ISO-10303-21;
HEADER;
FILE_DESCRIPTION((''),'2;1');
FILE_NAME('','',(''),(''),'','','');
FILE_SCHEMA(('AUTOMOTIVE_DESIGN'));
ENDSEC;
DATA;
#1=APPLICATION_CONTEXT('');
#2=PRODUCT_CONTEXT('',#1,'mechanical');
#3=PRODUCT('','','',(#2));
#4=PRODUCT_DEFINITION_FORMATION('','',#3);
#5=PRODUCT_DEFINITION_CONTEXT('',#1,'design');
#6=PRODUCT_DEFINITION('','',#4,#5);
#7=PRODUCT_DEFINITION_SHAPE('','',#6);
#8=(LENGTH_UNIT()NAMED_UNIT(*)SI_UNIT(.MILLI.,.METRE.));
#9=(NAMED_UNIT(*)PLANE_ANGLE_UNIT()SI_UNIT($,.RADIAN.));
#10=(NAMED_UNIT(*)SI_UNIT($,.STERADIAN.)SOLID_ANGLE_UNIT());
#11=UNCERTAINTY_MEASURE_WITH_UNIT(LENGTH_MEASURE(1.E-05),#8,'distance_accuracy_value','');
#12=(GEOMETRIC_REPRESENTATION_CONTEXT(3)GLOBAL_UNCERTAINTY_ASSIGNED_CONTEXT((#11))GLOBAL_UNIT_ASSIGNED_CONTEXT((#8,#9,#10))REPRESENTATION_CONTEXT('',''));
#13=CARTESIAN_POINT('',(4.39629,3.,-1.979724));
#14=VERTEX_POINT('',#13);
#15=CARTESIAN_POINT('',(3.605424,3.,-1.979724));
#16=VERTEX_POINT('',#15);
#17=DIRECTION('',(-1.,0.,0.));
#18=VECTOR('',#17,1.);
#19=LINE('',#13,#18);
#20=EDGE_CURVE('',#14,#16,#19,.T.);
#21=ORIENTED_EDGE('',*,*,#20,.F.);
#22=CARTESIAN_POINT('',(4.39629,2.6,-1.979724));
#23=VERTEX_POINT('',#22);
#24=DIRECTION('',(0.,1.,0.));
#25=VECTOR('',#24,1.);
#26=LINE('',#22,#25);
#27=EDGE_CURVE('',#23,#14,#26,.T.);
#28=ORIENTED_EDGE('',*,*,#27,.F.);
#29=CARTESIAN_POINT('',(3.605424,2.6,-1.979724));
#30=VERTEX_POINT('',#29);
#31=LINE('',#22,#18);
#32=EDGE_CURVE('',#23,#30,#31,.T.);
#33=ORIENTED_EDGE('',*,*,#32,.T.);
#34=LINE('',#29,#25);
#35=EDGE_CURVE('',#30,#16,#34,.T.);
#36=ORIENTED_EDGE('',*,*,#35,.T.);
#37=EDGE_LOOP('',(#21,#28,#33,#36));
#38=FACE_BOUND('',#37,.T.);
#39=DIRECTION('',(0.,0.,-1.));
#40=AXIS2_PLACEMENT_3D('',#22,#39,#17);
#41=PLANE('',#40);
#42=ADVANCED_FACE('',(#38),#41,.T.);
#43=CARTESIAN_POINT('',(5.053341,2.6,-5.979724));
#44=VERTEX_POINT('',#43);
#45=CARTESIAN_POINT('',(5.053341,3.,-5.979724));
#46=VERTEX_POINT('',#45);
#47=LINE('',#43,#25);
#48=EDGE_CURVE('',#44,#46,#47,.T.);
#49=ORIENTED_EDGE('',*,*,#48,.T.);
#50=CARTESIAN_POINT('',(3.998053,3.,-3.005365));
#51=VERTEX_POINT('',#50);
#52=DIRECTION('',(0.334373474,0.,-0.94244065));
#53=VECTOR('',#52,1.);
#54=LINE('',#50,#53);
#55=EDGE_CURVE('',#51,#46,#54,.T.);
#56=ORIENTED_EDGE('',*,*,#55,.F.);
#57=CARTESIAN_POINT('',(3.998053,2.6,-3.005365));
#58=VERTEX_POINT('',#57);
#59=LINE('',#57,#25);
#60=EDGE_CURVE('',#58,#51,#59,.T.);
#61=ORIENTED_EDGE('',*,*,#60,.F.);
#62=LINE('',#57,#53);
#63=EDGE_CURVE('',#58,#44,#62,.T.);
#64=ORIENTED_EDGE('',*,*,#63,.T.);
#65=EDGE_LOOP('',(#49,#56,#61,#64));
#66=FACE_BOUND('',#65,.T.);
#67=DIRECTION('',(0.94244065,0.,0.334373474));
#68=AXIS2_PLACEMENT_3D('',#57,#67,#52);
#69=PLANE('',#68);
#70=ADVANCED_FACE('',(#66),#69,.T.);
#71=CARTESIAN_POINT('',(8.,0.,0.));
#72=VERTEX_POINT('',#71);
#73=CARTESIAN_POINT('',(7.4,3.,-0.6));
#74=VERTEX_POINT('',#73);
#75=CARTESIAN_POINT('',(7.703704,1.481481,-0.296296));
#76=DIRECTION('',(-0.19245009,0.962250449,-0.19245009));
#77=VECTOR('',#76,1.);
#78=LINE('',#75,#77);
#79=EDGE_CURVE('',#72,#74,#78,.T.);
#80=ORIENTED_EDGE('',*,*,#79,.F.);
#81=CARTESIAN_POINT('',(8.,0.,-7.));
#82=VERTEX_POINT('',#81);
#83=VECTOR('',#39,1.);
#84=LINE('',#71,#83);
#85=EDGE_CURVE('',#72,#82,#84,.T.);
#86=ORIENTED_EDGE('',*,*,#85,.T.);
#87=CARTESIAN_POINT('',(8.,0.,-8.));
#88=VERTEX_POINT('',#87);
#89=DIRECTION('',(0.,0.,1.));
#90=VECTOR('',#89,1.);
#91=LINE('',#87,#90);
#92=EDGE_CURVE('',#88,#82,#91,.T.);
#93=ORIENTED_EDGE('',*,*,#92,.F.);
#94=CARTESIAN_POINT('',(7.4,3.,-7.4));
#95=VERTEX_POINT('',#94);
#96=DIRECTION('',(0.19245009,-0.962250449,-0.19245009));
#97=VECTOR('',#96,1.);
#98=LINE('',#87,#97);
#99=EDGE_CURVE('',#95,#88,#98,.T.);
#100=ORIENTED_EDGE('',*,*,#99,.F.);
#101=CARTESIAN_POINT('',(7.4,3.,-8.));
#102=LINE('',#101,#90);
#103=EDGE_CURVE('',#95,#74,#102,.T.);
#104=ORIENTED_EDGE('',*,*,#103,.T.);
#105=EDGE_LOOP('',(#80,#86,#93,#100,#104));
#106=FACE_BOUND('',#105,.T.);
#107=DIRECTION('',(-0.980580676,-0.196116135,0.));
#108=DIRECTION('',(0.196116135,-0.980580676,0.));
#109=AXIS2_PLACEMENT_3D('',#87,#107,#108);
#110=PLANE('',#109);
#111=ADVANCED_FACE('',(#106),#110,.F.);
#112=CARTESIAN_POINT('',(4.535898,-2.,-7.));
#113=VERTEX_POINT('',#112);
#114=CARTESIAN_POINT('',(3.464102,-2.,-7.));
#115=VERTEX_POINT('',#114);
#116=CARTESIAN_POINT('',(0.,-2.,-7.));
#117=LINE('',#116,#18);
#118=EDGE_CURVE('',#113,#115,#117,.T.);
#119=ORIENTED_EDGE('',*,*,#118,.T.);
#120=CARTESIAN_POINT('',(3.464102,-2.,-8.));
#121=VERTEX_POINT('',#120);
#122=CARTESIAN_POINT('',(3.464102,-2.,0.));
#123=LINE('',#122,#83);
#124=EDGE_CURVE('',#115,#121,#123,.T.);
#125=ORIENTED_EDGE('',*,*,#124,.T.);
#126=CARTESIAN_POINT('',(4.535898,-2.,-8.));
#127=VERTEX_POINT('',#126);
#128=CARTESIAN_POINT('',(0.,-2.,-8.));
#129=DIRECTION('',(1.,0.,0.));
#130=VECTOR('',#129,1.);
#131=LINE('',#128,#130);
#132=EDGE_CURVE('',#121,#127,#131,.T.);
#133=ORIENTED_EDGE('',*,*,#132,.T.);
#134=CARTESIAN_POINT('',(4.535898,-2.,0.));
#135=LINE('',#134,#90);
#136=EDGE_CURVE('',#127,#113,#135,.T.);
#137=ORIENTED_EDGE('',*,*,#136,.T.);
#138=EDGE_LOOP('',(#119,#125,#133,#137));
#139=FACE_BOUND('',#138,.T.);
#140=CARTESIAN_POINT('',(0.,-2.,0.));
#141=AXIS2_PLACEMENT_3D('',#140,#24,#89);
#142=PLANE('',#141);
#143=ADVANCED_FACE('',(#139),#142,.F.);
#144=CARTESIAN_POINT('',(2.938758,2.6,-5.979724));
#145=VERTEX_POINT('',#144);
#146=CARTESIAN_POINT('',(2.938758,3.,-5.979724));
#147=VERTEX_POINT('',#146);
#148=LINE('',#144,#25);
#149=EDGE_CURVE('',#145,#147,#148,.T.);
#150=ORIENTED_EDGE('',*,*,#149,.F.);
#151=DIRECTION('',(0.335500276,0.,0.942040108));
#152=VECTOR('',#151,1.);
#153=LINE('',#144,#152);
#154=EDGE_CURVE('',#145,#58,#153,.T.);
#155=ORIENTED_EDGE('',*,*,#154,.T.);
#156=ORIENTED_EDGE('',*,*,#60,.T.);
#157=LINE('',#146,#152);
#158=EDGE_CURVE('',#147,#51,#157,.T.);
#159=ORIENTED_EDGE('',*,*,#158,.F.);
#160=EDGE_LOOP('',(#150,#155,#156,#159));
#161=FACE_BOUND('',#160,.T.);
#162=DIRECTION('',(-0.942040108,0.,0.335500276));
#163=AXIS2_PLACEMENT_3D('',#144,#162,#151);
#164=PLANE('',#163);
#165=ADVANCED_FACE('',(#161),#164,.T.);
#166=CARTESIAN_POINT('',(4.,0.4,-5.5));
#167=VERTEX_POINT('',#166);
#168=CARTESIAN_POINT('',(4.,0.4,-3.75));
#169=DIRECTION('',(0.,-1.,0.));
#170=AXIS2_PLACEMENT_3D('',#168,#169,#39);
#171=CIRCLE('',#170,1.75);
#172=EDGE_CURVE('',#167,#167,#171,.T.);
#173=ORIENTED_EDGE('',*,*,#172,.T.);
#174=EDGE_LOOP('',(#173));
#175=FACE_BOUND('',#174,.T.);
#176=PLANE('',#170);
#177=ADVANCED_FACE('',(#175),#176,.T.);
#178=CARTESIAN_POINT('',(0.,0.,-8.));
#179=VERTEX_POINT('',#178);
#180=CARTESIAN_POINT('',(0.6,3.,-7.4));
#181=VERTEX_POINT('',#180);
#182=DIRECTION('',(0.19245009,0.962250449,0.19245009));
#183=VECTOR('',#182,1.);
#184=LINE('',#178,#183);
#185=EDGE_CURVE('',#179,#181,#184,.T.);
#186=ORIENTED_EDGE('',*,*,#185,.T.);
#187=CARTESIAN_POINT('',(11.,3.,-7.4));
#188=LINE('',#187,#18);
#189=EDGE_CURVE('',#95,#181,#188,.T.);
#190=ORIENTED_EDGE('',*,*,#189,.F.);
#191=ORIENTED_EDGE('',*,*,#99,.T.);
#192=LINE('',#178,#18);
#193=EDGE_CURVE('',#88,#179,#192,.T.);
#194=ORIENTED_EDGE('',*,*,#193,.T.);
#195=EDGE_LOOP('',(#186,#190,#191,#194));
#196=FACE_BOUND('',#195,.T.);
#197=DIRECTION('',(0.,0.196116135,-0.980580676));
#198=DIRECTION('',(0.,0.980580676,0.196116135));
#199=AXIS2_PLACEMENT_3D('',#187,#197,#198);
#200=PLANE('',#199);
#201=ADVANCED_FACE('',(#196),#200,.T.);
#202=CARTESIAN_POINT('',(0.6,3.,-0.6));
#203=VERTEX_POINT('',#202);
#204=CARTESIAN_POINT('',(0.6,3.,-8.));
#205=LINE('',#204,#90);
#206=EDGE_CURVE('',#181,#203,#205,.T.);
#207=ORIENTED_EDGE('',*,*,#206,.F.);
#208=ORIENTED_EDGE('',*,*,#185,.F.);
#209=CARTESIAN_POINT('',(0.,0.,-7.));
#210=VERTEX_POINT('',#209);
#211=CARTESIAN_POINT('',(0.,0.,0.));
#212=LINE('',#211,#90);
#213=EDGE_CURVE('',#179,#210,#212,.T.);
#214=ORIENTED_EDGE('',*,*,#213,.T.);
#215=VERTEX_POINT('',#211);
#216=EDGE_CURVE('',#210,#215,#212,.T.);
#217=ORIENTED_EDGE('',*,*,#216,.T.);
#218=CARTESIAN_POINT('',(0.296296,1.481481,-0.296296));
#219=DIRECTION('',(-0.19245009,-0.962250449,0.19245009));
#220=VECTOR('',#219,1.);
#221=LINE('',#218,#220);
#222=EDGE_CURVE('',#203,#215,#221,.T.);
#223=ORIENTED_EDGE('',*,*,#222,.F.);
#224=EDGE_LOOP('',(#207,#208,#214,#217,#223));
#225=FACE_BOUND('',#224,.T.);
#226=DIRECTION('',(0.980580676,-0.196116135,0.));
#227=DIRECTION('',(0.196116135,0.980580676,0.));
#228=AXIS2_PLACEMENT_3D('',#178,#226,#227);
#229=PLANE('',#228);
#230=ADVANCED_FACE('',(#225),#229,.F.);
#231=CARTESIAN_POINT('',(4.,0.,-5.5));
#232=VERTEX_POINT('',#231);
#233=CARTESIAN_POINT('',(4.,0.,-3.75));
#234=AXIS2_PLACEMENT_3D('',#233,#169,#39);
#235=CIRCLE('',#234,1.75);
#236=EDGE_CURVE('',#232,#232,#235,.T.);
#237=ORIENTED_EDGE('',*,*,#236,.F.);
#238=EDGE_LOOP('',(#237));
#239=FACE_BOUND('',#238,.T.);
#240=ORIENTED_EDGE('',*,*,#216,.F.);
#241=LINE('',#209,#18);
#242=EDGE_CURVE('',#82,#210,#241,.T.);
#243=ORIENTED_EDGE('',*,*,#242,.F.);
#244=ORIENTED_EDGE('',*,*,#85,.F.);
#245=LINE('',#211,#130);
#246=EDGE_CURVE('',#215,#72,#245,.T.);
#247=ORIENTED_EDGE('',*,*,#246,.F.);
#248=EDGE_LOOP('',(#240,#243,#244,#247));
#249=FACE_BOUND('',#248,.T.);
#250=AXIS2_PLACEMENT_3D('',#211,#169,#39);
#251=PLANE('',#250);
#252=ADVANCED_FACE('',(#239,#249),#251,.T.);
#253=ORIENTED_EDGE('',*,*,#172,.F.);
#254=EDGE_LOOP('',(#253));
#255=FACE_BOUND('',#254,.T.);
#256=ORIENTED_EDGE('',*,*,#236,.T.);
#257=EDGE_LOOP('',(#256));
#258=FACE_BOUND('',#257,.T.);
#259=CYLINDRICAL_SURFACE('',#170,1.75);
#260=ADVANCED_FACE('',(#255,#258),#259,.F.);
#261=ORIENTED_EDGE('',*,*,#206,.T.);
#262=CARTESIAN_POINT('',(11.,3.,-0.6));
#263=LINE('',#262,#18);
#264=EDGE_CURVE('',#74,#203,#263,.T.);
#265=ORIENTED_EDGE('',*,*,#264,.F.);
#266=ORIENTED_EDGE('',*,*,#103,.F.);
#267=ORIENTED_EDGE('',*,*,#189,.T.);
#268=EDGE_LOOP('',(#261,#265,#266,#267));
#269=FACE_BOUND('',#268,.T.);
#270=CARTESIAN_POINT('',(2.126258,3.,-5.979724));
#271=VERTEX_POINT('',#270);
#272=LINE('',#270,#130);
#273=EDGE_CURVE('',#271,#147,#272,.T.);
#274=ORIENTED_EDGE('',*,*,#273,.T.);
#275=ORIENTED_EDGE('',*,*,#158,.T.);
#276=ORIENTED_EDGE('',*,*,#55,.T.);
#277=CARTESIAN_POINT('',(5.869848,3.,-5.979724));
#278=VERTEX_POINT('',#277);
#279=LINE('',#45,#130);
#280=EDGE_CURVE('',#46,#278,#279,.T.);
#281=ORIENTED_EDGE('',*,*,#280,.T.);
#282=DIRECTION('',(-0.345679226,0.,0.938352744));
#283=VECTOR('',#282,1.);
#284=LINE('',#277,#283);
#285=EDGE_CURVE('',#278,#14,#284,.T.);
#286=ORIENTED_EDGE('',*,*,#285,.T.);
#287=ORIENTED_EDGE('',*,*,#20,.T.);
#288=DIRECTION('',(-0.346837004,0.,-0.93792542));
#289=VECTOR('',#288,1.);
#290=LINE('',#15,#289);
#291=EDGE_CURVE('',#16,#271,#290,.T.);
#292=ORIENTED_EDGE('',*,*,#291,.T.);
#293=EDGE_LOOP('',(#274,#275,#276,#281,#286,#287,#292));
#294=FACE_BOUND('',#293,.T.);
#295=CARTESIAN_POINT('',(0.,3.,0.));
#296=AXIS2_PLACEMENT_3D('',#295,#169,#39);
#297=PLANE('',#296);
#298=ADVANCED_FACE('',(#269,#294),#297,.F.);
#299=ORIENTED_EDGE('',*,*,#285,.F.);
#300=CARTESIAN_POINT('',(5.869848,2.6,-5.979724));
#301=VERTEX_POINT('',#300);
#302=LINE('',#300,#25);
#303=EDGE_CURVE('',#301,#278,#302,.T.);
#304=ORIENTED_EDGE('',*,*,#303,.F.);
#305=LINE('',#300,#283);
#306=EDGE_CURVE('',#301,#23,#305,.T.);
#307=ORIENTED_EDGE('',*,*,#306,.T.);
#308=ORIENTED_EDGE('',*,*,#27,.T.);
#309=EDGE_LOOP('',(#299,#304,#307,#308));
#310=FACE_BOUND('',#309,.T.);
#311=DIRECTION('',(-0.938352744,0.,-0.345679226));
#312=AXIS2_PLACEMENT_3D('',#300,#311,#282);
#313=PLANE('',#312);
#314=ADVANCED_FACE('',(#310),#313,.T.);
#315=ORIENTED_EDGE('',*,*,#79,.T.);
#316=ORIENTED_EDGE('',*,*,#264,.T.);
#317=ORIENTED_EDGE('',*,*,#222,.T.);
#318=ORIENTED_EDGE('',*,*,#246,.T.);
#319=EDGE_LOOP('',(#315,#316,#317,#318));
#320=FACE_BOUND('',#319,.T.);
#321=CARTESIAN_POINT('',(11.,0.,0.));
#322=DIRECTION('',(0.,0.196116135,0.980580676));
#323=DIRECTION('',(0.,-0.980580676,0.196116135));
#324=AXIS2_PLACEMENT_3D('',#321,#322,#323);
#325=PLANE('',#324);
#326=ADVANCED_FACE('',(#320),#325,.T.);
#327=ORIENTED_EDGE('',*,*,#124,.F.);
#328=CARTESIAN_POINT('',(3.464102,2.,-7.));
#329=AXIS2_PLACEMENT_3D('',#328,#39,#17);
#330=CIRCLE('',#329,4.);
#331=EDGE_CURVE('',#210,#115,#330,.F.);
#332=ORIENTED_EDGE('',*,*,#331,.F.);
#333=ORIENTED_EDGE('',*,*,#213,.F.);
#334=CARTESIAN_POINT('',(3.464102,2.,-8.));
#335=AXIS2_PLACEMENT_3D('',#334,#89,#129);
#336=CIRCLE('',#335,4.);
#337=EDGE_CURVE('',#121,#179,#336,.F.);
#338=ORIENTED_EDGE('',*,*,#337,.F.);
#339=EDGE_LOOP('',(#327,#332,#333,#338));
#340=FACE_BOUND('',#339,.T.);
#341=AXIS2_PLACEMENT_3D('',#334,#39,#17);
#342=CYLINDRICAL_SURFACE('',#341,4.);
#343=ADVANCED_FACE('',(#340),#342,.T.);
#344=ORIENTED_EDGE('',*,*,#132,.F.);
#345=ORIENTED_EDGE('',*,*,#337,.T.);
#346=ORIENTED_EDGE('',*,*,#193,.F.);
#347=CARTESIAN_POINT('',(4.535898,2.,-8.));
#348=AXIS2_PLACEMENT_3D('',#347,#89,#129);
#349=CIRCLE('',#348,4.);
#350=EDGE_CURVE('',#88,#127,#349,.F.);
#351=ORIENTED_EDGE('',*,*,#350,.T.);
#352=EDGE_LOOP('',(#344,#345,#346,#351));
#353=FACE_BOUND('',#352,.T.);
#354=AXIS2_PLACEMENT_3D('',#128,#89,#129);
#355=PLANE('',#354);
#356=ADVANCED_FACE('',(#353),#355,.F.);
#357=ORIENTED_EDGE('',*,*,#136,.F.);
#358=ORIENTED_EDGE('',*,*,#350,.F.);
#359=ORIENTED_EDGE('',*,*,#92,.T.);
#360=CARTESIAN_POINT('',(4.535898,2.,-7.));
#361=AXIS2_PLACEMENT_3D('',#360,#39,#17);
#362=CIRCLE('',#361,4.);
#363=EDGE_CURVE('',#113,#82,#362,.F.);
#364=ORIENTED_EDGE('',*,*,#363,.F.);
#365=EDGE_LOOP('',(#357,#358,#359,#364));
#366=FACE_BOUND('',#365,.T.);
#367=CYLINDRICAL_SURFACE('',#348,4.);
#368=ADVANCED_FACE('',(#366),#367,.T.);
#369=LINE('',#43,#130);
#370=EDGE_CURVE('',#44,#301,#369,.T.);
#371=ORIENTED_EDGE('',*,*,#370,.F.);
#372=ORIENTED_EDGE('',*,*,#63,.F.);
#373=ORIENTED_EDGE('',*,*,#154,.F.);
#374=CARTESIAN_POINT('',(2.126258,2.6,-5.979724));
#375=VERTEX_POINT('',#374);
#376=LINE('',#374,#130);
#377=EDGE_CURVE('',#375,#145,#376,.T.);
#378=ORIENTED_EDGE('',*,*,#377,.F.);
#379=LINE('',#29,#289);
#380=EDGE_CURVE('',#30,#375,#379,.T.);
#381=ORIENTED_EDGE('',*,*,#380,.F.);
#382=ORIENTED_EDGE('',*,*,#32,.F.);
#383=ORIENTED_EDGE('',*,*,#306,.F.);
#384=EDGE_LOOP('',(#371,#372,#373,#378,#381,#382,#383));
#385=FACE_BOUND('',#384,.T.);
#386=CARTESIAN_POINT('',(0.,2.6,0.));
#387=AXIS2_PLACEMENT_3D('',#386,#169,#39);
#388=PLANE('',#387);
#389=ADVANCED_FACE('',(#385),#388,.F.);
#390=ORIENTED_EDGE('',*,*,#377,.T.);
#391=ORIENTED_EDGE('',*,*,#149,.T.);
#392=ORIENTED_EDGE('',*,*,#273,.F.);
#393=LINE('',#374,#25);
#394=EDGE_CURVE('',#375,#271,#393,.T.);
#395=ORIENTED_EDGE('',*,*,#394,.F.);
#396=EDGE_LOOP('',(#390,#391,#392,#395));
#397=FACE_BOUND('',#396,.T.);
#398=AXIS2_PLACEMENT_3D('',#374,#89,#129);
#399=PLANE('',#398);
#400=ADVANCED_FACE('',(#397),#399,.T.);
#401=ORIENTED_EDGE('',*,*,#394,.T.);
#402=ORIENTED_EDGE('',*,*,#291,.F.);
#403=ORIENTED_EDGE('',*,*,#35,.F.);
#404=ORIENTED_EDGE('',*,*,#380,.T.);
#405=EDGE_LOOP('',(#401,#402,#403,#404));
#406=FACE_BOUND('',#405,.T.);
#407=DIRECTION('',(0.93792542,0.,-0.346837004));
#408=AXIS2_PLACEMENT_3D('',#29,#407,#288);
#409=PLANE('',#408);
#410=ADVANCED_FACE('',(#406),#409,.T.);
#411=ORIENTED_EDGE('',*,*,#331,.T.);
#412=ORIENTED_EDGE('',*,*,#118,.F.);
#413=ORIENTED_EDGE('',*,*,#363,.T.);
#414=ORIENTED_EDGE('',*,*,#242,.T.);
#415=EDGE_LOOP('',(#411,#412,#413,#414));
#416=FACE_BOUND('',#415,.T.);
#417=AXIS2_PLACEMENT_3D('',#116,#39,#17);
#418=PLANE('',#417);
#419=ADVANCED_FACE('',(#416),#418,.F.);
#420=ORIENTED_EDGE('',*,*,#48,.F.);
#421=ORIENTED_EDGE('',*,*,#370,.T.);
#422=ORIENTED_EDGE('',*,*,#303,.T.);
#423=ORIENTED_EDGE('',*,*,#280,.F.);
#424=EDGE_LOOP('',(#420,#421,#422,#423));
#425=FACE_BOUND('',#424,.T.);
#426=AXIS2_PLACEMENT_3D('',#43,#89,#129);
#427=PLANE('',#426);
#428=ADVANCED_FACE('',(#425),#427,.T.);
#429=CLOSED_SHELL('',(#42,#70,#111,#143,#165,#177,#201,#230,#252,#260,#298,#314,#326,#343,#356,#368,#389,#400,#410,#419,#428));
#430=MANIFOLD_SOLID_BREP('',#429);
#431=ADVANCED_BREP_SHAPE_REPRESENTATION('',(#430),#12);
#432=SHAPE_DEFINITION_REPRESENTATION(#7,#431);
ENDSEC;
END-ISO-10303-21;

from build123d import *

# Parameters (mm, degrees)
SKETCH1_W               = 8
SKETCH1_H               = 8
BOSS_EXTRUDE1_DEPTH     = 3
CUT_EXTRUDE1_DEPTH      = 12.704699911
CUT_EXTRUDE1_DEPTH_BACK = 12.704699911
CUT_EXTRUDE2_DEPTH      = 11
SKETCH4_R               = 1.75
CUT_EXTRUDE3_DEPTH      = 0.4
SKETCH5_W               = 8
SKETCH5_H               = 1
BOSS_EXTRUDE2_DEPTH     = 2
FILLET1_R               = 4
CUT_EXTRUDE4_DEPTH      = 0.4


with BuildPart() as part:
    # Sketch1 → Boss-Extrude1 (new body)
    with BuildSketch(Plane(origin=(0, 0, 0), x_dir=(1, 0, 0), z_dir=(0, 1, 0))):
        with Locations((4, 4)):
            Rectangle(SKETCH1_W, SKETCH1_H)
    extrude(amount=BOSS_EXTRUDE1_DEPTH)

    # Sketch2 → Cut-Extrude1 (cut, two sides: drawn at the far end of the back side and taken through both)
    with BuildSketch(Plane.XY.offset(-CUT_EXTRUDE1_DEPTH_BACK)):
        Polygon((0, 0), (0.6, 3), (0, 3), align=None)
        Polygon((8, 0), (7.4, 3), (8, 3), align=None)
    extrude(amount=CUT_EXTRUDE1_DEPTH + CUT_EXTRUDE1_DEPTH_BACK, mode=Mode.SUBTRACT)

    # Sketch3 → Cut-Extrude2 (cut)
    with BuildSketch(Plane(origin=(0, 0, 0), x_dir=(0, 0, -1), z_dir=(1, 0, 0))):
        Polygon((0, 0), (0.6, 3), (0, 3), align=None)
        Polygon((8, 3), (7.4, 3), (8, 0), align=None)
    extrude(amount=CUT_EXTRUDE2_DEPTH, mode=Mode.SUBTRACT)

    # Sketch4 → Cut-Extrude3 (cut)
    with BuildSketch(Plane.XZ):
        with Locations(Location((4, -3.75, 0), (0, 0, 270))):
            Circle(SKETCH4_R)
    extrude(amount=-CUT_EXTRUDE3_DEPTH, mode=Mode.SUBTRACT)

    # Sketch5 → Boss-Extrude2 (add)
    with BuildSketch(Plane.XZ):
        with Locations((4, -7.5)):
            Rectangle(SKETCH5_W, SKETCH5_H)
    extrude(amount=BOSS_EXTRUDE2_DEPTH)

    # Fillet1
    # the kernel refuses this fillet: 4 mm, written as the material it takes off along each edge
    with BuildSketch(Plane(origin=(8, -2, -16.660254038), x_dir=(0, 1, 0), z_dir=(0, 0, 1)), Plane(origin=(0, -2, 1.660254038), x_dir=(0, 1, 0), z_dir=(0, 0, -1))) as fillet1_piece_1:
        with BuildLine():
            CenterArc((4, 3.464101615), FILLET1_R, 180, 60)
            Line((0, 3.464101615), (-0.08, 3.464101615))
            Line((-0.08, 3.464101615), (-0.08, 0))
            Line((-0.08, 0), (0, -0.08))
            ThreePointArc((0, -0.08), (1, -0.08), (1.96, -0.069282032))
            Line((1.96, -0.069282032), (2, 0))
        make_face()
    extrude(amount=18.320508076, mode=Mode.SUBTRACT)

    # Sketch6 → Cut-Extrude4 (cut)
    with BuildSketch(Plane(origin=(0, 3, 0), x_dir=(1, 0, 0), z_dir=(0, 1, 0))):
        Polygon((3.605424489, 1.979723732), (2.126257822, 5.979723732), (2.938757822, 5.979723732), (3.998052694, 3.005364758), (5.053341155, 5.979723732), (5.869847566, 5.979723732), (4.396289873, 1.979723732), align=None)
    extrude(amount=-CUT_EXTRUDE4_DEPTH, mode=Mode.SUBTRACT)


solid = part.part
